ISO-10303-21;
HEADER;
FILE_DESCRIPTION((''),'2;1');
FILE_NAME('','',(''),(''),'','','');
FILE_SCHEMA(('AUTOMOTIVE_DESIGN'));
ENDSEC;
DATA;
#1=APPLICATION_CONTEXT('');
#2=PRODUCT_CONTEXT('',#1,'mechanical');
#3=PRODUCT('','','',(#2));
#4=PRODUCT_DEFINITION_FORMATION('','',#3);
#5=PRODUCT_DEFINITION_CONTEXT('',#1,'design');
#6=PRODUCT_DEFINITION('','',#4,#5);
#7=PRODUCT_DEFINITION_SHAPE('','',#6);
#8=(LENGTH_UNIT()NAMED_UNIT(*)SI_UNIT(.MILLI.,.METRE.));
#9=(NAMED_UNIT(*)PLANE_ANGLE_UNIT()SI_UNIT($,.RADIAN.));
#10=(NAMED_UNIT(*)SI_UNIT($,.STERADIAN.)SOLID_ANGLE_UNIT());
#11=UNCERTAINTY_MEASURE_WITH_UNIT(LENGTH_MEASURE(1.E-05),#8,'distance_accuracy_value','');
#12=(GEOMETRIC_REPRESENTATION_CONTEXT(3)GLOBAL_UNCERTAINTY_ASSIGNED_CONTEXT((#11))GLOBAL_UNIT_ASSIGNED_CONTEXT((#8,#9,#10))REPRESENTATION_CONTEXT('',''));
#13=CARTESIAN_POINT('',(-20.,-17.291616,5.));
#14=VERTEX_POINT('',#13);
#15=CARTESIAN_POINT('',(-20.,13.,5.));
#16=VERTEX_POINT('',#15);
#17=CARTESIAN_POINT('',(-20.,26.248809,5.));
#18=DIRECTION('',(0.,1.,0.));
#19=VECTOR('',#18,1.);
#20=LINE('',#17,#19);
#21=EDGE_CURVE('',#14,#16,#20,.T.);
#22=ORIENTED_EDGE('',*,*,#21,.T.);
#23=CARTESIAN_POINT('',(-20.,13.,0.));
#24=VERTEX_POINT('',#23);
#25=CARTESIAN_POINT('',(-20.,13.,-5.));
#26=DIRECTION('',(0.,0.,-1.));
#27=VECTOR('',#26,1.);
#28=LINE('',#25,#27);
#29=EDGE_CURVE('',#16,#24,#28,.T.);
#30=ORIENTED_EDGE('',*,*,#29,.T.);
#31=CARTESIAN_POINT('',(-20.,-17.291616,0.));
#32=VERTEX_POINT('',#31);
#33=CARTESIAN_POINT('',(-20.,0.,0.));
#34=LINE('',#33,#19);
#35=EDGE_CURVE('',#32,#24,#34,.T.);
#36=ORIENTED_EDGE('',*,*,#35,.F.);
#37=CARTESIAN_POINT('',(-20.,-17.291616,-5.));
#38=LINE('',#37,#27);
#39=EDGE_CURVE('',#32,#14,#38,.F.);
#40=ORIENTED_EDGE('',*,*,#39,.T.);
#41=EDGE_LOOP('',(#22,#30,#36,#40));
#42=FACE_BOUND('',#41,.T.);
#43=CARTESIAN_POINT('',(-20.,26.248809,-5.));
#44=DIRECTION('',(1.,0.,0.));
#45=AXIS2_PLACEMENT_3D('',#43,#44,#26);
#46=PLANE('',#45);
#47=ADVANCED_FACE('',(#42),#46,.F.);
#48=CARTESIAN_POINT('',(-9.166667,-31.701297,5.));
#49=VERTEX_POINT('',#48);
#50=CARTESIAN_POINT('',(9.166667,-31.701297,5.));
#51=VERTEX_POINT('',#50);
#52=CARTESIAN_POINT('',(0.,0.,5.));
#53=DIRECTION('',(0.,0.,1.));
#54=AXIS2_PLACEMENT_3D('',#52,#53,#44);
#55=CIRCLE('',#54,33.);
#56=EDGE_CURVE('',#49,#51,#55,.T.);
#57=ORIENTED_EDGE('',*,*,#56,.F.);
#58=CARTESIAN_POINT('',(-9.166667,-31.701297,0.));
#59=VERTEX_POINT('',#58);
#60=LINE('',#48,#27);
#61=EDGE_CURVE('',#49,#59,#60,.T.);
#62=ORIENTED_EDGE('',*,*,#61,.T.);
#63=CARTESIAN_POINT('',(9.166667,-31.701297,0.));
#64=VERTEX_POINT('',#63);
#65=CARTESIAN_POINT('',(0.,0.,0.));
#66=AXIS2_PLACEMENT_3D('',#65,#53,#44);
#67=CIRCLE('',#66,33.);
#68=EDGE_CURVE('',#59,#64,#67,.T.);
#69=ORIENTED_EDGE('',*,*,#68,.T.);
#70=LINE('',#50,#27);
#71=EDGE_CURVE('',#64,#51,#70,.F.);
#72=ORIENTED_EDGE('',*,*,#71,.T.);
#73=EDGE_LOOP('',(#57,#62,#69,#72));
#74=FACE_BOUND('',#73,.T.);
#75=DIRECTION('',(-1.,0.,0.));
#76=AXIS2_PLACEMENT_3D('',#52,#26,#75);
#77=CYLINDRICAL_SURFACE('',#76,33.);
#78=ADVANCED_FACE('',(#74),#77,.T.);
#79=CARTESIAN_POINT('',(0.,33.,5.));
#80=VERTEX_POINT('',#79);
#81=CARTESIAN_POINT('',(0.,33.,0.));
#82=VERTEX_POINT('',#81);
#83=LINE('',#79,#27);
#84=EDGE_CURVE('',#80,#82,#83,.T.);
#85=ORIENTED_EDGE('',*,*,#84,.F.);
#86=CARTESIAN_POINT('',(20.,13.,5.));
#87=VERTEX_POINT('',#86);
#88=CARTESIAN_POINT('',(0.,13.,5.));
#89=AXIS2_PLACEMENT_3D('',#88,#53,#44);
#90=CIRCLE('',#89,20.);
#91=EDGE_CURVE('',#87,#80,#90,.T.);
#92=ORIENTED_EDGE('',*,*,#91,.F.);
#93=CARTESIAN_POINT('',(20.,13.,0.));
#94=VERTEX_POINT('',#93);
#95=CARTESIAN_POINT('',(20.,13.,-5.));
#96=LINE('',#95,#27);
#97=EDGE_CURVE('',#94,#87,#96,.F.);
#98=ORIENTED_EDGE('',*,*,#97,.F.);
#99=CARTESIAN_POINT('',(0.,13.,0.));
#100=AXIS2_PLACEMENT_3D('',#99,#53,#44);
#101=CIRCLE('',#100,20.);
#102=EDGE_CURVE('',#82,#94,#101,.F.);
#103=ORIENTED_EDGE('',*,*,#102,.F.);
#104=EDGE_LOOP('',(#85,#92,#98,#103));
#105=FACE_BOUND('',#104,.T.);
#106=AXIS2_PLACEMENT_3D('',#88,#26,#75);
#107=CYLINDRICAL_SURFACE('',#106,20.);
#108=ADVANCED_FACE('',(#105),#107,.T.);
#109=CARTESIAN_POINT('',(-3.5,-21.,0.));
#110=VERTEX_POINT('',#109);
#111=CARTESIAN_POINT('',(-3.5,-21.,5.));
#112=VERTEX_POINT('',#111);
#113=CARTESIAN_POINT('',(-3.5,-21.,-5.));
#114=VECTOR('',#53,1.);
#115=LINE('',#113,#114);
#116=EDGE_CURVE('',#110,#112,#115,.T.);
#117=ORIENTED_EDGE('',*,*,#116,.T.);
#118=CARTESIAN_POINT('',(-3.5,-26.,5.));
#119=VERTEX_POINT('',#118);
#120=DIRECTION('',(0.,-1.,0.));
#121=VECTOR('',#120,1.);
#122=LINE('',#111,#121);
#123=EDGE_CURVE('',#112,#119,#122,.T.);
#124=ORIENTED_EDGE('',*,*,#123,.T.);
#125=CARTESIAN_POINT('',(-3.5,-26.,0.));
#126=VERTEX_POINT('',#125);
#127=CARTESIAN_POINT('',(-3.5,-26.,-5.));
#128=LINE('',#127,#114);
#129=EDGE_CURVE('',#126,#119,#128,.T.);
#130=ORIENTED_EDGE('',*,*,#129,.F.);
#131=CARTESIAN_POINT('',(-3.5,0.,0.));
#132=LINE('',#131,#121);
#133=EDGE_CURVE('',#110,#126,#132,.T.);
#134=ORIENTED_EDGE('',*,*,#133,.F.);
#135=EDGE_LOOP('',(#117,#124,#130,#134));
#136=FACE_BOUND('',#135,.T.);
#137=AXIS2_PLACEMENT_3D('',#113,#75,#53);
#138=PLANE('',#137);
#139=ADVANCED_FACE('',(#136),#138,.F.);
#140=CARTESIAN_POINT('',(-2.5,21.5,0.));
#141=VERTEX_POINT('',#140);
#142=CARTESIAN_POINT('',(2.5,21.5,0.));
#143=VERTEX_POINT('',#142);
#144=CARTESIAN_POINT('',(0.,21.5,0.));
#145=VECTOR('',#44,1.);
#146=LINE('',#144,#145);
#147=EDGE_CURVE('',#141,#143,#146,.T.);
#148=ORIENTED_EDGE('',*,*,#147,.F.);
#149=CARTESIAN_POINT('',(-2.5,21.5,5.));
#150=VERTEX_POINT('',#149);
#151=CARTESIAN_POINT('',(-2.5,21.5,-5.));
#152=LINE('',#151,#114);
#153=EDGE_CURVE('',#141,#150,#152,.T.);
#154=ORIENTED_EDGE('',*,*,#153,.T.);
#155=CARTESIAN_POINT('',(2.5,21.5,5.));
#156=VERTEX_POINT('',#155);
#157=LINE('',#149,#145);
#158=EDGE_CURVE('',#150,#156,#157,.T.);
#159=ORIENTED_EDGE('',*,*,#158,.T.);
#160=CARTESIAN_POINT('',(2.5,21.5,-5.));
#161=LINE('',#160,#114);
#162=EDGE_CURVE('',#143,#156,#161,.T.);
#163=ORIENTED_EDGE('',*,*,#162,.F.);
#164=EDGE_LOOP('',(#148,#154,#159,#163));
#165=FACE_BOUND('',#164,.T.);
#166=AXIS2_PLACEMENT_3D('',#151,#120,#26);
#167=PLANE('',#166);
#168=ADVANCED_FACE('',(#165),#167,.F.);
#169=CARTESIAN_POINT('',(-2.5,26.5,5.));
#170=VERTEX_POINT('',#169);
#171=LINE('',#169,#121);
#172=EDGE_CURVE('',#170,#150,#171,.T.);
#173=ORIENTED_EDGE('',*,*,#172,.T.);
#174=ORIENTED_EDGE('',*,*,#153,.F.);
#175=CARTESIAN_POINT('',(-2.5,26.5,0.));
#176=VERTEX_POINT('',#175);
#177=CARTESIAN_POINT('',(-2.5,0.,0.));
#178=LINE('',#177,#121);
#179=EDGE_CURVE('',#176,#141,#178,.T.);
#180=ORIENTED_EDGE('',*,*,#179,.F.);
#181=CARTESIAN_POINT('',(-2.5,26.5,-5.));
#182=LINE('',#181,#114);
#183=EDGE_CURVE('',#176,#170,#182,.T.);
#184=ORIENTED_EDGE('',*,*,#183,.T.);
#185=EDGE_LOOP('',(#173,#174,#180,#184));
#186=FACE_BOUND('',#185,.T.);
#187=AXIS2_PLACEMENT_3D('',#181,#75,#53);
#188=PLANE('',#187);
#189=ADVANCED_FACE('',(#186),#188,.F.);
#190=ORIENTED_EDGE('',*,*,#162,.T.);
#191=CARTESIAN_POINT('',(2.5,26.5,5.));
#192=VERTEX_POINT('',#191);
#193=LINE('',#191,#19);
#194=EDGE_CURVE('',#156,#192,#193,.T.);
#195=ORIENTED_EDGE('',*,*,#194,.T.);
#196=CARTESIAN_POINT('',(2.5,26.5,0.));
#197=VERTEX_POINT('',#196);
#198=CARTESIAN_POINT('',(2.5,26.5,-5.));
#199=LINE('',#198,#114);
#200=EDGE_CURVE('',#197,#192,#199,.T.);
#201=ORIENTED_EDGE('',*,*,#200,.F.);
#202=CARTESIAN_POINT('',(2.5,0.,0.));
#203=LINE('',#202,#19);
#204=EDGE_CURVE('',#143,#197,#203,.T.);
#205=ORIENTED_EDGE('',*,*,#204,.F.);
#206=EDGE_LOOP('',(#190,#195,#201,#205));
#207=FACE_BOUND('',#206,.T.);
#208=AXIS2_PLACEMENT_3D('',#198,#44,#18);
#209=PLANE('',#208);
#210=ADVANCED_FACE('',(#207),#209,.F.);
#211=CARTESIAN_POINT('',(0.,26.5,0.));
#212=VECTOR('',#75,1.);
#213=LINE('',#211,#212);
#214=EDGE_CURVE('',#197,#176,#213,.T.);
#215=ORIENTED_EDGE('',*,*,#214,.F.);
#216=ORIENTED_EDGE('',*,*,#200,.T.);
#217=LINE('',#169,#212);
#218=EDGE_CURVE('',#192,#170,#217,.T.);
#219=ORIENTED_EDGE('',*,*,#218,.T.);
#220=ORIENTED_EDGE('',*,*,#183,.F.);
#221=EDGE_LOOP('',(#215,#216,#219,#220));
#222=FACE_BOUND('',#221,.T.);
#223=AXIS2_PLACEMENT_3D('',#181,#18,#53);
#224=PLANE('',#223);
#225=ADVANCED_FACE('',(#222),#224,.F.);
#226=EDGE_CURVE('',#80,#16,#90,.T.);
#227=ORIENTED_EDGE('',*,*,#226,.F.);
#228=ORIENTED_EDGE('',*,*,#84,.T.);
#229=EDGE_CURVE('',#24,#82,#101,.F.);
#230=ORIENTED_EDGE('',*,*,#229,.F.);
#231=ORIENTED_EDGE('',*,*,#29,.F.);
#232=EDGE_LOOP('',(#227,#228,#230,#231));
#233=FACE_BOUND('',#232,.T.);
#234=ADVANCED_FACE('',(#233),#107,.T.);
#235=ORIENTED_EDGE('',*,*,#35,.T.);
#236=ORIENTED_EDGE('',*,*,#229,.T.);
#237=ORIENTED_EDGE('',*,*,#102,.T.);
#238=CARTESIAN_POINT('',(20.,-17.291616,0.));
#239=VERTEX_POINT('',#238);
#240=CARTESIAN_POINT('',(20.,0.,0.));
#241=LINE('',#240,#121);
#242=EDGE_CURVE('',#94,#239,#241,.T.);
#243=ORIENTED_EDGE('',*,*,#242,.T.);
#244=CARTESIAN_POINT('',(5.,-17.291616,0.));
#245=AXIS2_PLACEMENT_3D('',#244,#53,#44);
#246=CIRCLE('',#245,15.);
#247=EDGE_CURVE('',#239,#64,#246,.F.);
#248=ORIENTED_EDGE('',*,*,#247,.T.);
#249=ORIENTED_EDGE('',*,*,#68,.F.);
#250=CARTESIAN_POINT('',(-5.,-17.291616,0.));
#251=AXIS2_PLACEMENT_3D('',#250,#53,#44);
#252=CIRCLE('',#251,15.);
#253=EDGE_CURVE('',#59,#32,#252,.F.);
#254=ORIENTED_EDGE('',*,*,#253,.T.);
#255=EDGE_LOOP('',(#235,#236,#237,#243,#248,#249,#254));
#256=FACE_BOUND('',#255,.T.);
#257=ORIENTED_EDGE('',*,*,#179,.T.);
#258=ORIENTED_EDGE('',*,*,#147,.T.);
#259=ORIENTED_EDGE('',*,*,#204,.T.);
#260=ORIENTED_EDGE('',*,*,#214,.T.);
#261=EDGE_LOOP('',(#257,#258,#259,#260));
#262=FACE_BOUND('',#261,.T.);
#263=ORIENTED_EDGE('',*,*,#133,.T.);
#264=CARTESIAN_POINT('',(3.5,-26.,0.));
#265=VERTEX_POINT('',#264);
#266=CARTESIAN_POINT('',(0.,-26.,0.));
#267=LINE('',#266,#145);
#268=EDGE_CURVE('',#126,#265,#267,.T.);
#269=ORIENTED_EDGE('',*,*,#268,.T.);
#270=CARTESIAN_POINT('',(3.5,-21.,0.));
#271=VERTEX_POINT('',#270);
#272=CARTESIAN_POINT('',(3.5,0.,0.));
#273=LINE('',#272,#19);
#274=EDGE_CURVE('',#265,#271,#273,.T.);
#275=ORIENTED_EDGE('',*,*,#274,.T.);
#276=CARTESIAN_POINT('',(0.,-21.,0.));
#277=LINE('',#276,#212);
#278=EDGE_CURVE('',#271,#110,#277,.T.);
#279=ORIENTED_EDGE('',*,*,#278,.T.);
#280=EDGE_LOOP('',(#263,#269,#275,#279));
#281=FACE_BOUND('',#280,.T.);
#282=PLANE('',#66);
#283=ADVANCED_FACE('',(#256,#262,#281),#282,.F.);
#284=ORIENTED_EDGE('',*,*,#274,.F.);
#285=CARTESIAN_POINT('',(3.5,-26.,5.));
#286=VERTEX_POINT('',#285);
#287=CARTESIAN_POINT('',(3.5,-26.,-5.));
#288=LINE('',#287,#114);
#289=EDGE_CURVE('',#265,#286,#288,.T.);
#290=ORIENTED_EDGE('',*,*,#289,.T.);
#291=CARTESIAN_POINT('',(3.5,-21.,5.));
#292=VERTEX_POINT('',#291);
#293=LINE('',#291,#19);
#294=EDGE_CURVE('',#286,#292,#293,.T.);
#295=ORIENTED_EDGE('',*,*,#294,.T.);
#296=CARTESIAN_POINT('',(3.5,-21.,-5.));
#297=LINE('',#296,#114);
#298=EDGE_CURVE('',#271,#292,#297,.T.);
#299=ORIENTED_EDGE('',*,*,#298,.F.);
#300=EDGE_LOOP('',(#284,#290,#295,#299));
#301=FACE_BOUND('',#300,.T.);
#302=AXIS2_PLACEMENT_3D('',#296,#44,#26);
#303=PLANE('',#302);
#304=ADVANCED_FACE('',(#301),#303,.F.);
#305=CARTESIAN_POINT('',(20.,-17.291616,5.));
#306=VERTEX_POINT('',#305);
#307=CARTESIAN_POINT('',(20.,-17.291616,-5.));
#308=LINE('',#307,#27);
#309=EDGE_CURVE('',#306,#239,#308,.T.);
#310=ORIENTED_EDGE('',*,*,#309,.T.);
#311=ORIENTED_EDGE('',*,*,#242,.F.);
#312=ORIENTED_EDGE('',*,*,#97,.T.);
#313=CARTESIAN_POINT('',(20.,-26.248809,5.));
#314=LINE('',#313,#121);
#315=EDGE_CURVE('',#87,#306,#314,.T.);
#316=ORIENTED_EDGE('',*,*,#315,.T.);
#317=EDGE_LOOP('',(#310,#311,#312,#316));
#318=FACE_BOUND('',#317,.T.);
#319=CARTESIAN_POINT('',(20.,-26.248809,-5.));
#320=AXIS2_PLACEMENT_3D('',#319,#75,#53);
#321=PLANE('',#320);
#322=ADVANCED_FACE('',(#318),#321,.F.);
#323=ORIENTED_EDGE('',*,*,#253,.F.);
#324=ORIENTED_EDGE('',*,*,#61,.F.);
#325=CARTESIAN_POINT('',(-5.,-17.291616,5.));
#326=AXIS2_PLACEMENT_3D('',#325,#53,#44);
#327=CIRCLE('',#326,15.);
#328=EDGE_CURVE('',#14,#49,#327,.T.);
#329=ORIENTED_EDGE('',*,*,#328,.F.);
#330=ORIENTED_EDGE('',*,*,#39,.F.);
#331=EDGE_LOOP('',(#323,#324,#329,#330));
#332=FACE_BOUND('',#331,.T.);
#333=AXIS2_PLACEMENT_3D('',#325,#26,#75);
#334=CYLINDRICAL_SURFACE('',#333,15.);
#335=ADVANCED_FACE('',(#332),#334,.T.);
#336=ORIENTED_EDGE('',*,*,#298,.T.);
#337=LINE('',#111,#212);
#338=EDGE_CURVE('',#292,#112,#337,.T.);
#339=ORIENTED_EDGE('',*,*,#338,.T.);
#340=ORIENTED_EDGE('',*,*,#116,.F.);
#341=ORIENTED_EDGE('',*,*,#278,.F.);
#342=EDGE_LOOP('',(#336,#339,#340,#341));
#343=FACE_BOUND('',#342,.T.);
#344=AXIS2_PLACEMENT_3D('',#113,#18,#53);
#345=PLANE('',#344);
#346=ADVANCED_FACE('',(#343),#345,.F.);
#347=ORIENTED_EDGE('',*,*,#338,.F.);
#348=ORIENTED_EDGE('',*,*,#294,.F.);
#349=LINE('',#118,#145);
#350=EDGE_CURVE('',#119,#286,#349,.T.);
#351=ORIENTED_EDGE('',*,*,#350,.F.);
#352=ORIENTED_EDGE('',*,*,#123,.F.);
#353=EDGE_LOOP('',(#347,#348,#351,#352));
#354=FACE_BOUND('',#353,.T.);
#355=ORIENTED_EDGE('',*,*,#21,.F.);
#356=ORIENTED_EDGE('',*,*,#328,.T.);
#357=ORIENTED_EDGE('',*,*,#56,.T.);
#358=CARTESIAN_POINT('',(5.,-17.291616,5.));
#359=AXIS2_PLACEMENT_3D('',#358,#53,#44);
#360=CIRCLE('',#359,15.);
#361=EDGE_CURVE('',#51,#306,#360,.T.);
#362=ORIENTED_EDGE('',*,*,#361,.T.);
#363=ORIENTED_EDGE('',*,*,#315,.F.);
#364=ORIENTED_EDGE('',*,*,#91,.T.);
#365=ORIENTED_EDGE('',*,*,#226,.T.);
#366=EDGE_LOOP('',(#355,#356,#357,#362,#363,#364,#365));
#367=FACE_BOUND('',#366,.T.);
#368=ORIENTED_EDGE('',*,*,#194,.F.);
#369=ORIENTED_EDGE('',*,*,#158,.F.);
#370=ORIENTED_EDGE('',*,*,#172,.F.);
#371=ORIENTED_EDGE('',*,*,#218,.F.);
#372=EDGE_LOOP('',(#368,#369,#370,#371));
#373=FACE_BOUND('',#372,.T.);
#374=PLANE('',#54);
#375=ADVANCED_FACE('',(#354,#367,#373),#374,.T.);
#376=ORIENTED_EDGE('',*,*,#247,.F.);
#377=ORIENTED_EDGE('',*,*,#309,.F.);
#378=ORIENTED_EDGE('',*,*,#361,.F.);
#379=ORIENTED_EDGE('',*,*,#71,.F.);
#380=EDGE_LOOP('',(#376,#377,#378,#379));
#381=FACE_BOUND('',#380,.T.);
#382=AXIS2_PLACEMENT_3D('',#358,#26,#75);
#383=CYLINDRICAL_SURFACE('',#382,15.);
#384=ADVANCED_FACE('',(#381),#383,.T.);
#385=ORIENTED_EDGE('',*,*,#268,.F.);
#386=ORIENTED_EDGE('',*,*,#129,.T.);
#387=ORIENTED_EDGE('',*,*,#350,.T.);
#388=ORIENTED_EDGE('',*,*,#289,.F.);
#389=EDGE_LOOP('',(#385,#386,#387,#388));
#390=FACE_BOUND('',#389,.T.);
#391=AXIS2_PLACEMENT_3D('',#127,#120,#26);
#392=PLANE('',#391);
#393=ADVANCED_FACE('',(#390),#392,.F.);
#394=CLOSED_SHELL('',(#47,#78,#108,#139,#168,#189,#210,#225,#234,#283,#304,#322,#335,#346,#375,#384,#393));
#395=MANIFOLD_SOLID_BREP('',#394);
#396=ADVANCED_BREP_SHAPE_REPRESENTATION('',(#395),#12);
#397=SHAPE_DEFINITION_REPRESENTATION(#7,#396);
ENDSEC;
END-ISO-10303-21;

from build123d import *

# Parameters (mm, degrees)
SKETCH1_R           = 33
BOSS_EXTRUDE1_DEPTH = 5
CUT_EXTRUDE3_START  = -10
CUT_EXTRUDE3_DEPTH  = 10
FILLET2_R           = 20
FILLET3_R           = 15
SKETCH7_W           = 5
SKETCH7_H           = 5
SKETCH7_W_2         = 7
CUT_EXTRUDE4_DEPTH  = 10


with BuildPart() as part:
    # Sketch1 → Boss-Extrude1 (new body)
    with BuildSketch(Plane.XY):
        Circle(SKETCH1_R)
    extrude(amount=BOSS_EXTRUDE1_DEPTH)

    # Sketch6 → Cut-Extrude3 (cut)
    with BuildSketch(Plane.XY.offset(5).offset(CUT_EXTRUDE3_START)):
        with BuildLine():
            Line((-20, 26.248809497), (-20, -26.248809497))
            ThreePointArc((-20, -26.248809497), (-33, 0), (-20, 26.248809497))
        make_face()
        with BuildLine():
            Line((20, -26.248809497), (20, 26.248809497))
            ThreePointArc((20, 26.248809497), (33, 0), (20, -26.248809497))
        make_face()
    extrude(amount=CUT_EXTRUDE3_DEPTH, mode=Mode.SUBTRACT)

    # Fillet2
    fillet2_edges = [part.edges().sort_by_distance(p)[0] for p in [
        (-20, 26.248809497, 2.5),
        (20, 26.248809497, 2.5),
    ]]
    fillet(fillet2_edges, radius=FILLET2_R - 0.0001)  # a hair under: the kernel refuses the full size

    # Fillet3
    fillet3_edges = [part.edges().sort_by_distance(p)[0] for p in [
        (-20, -26.248809497, 2.5),
        (20, -26.248809497, 2.5),
    ]]
    fillet(fillet3_edges, radius=FILLET3_R)

    # Sketch7 → Cut-Extrude4 (cut)
    with BuildSketch(Plane.XY.offset(5)):
        with Locations((0, 24)):
            Rectangle(SKETCH7_W, SKETCH7_H)
        with Locations((0, -23.5)):
            Rectangle(SKETCH7_W_2, SKETCH7_H)
    extrude(amount=-CUT_EXTRUDE4_DEPTH, mode=Mode.SUBTRACT)


solid = part.part
